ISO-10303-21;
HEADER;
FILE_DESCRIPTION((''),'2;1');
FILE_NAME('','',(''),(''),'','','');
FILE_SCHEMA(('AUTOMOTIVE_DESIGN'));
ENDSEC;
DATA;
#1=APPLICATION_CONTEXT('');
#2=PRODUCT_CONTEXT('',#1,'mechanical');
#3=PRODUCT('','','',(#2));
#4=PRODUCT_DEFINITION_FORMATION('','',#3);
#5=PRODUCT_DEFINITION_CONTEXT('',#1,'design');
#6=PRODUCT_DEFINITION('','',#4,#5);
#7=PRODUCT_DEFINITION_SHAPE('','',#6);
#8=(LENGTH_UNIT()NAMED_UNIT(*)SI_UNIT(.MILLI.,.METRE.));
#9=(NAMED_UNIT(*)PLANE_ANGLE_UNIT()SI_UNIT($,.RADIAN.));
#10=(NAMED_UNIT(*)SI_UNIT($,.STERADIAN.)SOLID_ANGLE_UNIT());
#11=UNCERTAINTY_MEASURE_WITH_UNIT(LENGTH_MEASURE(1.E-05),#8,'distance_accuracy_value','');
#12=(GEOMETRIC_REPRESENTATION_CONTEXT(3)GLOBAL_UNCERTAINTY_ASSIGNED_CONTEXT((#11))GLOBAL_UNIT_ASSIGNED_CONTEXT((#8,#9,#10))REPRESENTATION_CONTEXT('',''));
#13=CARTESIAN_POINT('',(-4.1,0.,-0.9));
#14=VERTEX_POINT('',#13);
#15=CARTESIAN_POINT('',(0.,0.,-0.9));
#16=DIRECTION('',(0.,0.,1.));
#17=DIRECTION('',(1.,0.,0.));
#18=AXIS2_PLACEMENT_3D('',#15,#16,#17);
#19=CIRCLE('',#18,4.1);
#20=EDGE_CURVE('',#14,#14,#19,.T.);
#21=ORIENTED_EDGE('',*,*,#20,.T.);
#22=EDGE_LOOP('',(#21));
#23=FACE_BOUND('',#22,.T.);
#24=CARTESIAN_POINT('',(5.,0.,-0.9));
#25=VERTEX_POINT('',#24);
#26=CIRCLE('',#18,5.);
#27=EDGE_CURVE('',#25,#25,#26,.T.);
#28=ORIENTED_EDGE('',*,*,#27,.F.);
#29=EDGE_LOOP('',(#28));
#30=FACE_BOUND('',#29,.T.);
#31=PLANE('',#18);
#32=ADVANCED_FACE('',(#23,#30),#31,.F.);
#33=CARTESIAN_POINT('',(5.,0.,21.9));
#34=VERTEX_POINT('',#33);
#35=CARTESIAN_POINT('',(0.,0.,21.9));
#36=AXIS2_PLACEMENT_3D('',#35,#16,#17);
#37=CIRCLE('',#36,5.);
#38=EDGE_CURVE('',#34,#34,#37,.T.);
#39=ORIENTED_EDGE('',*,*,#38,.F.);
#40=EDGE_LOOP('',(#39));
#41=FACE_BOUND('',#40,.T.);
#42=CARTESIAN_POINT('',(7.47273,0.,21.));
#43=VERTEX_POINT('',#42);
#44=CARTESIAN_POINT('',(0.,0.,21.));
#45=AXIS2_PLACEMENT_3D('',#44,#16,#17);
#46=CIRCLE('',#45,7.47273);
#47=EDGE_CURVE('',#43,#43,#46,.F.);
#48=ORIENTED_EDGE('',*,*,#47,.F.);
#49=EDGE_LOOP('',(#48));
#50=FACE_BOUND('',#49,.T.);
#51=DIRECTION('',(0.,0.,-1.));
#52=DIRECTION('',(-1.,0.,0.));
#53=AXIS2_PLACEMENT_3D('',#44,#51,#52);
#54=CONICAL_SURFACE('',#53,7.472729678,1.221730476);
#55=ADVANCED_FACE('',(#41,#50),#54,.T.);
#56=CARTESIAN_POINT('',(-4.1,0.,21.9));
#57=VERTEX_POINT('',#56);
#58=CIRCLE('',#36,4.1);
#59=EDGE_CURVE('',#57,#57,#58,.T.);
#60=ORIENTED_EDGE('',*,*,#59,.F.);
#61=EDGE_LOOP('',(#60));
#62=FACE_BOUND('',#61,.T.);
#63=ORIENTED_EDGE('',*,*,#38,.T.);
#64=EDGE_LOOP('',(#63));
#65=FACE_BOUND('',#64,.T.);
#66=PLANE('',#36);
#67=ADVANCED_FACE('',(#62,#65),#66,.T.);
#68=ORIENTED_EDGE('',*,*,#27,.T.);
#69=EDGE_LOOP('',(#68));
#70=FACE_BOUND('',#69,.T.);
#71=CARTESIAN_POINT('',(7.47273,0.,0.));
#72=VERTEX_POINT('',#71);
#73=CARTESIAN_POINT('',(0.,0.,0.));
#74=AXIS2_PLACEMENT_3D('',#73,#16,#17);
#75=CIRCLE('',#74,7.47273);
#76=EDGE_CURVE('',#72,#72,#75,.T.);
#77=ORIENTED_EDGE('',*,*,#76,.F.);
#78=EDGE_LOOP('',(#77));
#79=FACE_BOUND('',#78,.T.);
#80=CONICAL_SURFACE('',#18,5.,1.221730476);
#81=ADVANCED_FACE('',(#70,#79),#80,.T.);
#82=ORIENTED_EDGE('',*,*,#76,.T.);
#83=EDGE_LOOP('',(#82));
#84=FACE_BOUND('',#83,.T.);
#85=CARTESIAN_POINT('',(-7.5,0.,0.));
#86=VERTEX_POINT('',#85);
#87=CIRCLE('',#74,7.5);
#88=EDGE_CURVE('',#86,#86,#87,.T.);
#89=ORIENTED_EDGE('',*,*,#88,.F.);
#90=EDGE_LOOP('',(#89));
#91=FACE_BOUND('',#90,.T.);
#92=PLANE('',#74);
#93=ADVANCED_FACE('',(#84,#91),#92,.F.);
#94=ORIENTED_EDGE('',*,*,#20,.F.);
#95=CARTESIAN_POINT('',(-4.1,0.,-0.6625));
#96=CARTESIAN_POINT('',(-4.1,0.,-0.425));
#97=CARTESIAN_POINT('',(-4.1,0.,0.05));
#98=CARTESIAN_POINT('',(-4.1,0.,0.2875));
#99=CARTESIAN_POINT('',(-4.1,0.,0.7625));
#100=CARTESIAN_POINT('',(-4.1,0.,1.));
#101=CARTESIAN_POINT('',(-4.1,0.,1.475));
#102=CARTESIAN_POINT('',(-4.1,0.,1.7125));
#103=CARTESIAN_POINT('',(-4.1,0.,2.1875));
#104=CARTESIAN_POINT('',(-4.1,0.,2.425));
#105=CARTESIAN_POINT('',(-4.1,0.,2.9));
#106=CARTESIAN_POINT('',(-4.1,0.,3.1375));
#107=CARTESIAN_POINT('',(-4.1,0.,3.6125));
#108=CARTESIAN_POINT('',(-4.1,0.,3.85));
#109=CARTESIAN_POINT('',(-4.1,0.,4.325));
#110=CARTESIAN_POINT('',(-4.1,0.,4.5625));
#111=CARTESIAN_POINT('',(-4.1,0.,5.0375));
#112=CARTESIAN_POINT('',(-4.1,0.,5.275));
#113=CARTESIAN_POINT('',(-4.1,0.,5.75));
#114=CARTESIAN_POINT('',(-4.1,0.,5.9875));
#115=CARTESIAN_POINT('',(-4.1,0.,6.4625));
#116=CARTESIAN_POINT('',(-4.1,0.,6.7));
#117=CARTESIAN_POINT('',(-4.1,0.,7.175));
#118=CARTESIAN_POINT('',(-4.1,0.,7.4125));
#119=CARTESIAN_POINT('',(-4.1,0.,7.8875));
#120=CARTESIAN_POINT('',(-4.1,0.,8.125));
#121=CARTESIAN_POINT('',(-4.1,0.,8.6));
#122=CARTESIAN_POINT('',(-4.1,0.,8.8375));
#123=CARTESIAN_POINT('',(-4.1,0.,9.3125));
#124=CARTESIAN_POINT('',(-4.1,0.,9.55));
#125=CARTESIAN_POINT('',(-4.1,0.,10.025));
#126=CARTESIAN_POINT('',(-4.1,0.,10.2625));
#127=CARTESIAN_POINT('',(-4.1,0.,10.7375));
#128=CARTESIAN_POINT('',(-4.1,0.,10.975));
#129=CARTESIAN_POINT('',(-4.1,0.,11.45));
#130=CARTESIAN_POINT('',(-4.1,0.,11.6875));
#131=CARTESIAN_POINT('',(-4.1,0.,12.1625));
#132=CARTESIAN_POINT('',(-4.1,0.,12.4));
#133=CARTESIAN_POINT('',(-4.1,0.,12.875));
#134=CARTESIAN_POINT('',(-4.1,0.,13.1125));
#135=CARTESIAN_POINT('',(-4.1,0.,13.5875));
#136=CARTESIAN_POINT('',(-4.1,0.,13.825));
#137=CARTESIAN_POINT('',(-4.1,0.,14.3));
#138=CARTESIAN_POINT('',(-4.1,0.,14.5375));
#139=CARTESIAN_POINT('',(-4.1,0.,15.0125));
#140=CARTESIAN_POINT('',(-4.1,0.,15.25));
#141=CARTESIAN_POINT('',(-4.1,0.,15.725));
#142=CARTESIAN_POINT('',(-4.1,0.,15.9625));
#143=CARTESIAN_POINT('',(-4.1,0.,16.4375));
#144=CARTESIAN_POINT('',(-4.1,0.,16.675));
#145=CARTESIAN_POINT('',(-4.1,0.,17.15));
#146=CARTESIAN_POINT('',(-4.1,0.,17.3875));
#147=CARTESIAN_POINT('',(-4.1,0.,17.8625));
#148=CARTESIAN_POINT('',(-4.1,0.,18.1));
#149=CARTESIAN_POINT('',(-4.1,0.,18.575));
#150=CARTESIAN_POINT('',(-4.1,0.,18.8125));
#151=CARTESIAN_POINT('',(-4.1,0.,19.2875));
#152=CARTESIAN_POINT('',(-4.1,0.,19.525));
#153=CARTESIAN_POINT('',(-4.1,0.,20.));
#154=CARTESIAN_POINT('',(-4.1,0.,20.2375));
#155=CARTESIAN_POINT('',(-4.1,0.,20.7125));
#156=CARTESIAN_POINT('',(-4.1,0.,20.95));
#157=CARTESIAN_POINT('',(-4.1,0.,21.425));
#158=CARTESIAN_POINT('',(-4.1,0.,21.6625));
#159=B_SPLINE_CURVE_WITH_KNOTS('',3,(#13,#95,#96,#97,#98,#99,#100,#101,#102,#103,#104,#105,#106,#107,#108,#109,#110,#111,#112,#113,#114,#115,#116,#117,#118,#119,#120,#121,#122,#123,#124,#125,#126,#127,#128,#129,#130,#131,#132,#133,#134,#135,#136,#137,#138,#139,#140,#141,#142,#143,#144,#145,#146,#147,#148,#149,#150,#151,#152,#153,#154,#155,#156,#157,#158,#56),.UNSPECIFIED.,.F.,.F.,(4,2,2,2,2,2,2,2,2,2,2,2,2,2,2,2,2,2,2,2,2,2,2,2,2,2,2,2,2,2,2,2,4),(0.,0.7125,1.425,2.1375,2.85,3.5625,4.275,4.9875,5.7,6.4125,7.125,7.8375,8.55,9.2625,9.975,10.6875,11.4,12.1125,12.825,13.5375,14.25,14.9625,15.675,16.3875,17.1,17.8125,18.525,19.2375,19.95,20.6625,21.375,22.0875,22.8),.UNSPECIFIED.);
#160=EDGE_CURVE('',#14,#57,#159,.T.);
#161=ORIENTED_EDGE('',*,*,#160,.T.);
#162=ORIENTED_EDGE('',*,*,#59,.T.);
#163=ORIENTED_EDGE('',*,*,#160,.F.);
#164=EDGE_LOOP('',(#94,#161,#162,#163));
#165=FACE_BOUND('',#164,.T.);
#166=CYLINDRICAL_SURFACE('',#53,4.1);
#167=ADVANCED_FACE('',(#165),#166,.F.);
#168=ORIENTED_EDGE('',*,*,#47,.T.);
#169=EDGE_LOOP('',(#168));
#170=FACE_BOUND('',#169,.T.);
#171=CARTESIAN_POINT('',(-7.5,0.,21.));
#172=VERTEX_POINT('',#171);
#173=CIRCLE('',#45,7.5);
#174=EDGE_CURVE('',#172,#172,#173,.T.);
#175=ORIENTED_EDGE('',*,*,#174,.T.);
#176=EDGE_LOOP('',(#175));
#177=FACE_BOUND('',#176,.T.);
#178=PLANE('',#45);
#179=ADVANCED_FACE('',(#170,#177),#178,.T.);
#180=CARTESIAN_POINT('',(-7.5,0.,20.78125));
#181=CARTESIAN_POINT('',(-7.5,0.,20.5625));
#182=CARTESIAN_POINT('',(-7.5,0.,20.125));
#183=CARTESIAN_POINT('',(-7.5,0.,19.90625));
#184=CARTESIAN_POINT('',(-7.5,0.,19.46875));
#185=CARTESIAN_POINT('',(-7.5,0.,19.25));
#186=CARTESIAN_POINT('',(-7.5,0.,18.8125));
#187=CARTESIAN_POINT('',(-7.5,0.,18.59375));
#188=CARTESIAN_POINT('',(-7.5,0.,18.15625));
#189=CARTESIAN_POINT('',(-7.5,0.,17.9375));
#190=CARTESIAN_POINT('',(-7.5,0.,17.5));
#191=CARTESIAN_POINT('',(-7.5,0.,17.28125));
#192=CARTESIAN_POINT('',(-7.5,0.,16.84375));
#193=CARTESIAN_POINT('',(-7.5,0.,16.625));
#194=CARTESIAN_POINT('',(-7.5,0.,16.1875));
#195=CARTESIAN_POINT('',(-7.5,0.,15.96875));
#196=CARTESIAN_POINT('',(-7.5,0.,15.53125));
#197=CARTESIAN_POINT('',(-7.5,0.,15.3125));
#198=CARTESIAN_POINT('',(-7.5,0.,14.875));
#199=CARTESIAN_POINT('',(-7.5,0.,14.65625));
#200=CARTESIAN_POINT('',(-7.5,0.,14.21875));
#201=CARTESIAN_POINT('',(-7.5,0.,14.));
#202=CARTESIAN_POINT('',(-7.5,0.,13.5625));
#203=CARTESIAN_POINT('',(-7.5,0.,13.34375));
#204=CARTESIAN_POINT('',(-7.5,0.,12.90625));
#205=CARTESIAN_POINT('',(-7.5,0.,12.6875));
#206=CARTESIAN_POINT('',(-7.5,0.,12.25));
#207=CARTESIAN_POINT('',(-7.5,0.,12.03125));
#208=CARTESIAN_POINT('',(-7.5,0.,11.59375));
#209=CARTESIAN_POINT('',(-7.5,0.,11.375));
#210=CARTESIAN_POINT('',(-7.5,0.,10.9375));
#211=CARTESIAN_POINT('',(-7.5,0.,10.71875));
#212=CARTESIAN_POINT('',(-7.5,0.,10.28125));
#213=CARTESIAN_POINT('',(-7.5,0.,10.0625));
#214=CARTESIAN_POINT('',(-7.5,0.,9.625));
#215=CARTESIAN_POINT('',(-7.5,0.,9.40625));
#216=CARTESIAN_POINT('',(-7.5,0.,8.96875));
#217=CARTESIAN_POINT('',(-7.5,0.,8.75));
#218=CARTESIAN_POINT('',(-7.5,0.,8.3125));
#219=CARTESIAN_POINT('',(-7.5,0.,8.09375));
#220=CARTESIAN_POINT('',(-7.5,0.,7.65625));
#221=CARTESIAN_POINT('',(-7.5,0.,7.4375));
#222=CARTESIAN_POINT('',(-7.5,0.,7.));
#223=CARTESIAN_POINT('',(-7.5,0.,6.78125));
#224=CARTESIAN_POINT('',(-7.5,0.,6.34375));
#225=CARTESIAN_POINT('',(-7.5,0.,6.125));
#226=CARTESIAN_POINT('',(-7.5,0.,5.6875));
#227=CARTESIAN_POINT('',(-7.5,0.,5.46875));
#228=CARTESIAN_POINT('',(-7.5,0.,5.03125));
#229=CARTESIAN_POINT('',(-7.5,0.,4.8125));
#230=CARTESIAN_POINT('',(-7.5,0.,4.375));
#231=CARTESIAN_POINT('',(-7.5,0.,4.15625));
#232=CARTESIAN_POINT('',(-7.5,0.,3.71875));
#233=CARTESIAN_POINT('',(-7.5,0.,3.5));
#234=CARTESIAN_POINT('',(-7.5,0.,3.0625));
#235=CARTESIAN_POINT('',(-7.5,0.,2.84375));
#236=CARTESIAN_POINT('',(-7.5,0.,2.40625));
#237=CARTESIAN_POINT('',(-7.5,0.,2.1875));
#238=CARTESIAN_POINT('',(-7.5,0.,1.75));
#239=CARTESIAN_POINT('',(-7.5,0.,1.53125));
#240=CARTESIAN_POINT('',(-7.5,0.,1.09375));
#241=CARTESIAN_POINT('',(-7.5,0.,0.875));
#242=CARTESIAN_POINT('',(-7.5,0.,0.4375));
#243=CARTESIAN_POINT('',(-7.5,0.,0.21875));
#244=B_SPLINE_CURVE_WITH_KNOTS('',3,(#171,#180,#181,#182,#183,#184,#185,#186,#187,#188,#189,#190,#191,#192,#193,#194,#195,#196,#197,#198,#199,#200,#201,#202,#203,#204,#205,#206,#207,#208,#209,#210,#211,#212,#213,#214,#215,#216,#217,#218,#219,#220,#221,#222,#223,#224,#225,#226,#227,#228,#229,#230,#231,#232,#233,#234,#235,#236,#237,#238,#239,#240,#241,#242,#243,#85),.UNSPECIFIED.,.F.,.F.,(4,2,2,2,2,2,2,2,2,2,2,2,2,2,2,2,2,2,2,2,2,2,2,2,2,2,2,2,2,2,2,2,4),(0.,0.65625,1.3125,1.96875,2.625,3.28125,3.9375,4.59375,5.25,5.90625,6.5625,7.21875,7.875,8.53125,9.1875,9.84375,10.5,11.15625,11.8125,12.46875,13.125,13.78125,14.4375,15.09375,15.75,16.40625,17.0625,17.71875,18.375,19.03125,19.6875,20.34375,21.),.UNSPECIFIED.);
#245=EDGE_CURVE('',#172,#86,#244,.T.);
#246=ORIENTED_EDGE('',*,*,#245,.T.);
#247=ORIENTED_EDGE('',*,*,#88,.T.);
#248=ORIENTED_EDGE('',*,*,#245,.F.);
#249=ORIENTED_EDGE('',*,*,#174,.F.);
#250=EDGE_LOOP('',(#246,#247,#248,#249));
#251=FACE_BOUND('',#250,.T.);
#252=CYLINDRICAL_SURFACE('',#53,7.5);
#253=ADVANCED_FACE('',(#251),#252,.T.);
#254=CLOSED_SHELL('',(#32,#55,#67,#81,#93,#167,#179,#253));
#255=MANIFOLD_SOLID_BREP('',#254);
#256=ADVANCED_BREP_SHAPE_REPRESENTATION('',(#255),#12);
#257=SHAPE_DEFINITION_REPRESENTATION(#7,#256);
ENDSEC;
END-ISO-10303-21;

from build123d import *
from OCP.BRepFilletAPI import BRepFilletAPI_MakeChamfer

# Parameters (mm, degrees)
SKETCH1_R           = 7.5
SKETCH1_R_2         = 4.1
BOSS_EXTRUDE1_DEPTH = 21
BOSS_EXTRUDE2_START = -0.9
SKETCH2_R           = 5
SKETCH2_R_2         = 4.1
BOSS_EXTRUDE2_DEPTH = 22.8
CHAMFER1_SIZE       = 0.9
CHAMFER1_SIZE_2     = 2.472729678


with BuildPart() as part:
    # Sketch1 → Boss-Extrude1 (new body)
    with BuildSketch(Plane.XY):
        with Locations(Location((0, 0, 0), (0, 0, 180))):
            Circle(SKETCH1_R)
        with Locations(Location((0, 0, 0), (0, 0, 180))):
            Circle(SKETCH1_R_2, mode=Mode.SUBTRACT)
    extrude(amount=BOSS_EXTRUDE1_DEPTH)

    # Sketch2 → Boss-Extrude2 (add)
    with BuildSketch(Plane.XY.offset(BOSS_EXTRUDE2_START)):
        Circle(SKETCH2_R)
        with Locations(Location((0, 0, 0), (0, 0, 180))):
            Circle(SKETCH2_R_2, mode=Mode.SUBTRACT)
    extrude(amount=BOSS_EXTRUDE2_DEPTH)

    # Chamfer1
    chamfer1_edges_1 = [part.edges().sort_by_distance(p)[0] for p in [
        (-5, 0, 0),
    ]]
    chamfer1_side_1 = [part.faces().sort_by_distance(p)[0] for p in [
        (-5, 0, -0.018),
    ]]
    chamfer1_edges_2 = [part.edges().sort_by_distance(p)[0] for p in [
        (-5, 0, 21),
    ]]
    chamfer1_side_2 = [part.faces().sort_by_distance(p)[0] for p in [
        (-5.018, 0, 21),
    ]]
    chamfer1 = BRepFilletAPI_MakeChamfer(part.part.solid().wrapped)
    for e in chamfer1_edges_1:
        chamfer1.Add(CHAMFER1_SIZE - 0.0001, CHAMFER1_SIZE_2 - 0.0001, e.wrapped, chamfer1_side_1[0].wrapped)
    for e in chamfer1_edges_2:
        chamfer1.Add(CHAMFER1_SIZE_2 - 0.0001, CHAMFER1_SIZE - 0.0001, e.wrapped, chamfer1_side_2[0].wrapped)
    add(Compound.cast(chamfer1.Shape()), mode=Mode.REPLACE)  # a hair under: the kernel refuses the full size


solid = part.part
